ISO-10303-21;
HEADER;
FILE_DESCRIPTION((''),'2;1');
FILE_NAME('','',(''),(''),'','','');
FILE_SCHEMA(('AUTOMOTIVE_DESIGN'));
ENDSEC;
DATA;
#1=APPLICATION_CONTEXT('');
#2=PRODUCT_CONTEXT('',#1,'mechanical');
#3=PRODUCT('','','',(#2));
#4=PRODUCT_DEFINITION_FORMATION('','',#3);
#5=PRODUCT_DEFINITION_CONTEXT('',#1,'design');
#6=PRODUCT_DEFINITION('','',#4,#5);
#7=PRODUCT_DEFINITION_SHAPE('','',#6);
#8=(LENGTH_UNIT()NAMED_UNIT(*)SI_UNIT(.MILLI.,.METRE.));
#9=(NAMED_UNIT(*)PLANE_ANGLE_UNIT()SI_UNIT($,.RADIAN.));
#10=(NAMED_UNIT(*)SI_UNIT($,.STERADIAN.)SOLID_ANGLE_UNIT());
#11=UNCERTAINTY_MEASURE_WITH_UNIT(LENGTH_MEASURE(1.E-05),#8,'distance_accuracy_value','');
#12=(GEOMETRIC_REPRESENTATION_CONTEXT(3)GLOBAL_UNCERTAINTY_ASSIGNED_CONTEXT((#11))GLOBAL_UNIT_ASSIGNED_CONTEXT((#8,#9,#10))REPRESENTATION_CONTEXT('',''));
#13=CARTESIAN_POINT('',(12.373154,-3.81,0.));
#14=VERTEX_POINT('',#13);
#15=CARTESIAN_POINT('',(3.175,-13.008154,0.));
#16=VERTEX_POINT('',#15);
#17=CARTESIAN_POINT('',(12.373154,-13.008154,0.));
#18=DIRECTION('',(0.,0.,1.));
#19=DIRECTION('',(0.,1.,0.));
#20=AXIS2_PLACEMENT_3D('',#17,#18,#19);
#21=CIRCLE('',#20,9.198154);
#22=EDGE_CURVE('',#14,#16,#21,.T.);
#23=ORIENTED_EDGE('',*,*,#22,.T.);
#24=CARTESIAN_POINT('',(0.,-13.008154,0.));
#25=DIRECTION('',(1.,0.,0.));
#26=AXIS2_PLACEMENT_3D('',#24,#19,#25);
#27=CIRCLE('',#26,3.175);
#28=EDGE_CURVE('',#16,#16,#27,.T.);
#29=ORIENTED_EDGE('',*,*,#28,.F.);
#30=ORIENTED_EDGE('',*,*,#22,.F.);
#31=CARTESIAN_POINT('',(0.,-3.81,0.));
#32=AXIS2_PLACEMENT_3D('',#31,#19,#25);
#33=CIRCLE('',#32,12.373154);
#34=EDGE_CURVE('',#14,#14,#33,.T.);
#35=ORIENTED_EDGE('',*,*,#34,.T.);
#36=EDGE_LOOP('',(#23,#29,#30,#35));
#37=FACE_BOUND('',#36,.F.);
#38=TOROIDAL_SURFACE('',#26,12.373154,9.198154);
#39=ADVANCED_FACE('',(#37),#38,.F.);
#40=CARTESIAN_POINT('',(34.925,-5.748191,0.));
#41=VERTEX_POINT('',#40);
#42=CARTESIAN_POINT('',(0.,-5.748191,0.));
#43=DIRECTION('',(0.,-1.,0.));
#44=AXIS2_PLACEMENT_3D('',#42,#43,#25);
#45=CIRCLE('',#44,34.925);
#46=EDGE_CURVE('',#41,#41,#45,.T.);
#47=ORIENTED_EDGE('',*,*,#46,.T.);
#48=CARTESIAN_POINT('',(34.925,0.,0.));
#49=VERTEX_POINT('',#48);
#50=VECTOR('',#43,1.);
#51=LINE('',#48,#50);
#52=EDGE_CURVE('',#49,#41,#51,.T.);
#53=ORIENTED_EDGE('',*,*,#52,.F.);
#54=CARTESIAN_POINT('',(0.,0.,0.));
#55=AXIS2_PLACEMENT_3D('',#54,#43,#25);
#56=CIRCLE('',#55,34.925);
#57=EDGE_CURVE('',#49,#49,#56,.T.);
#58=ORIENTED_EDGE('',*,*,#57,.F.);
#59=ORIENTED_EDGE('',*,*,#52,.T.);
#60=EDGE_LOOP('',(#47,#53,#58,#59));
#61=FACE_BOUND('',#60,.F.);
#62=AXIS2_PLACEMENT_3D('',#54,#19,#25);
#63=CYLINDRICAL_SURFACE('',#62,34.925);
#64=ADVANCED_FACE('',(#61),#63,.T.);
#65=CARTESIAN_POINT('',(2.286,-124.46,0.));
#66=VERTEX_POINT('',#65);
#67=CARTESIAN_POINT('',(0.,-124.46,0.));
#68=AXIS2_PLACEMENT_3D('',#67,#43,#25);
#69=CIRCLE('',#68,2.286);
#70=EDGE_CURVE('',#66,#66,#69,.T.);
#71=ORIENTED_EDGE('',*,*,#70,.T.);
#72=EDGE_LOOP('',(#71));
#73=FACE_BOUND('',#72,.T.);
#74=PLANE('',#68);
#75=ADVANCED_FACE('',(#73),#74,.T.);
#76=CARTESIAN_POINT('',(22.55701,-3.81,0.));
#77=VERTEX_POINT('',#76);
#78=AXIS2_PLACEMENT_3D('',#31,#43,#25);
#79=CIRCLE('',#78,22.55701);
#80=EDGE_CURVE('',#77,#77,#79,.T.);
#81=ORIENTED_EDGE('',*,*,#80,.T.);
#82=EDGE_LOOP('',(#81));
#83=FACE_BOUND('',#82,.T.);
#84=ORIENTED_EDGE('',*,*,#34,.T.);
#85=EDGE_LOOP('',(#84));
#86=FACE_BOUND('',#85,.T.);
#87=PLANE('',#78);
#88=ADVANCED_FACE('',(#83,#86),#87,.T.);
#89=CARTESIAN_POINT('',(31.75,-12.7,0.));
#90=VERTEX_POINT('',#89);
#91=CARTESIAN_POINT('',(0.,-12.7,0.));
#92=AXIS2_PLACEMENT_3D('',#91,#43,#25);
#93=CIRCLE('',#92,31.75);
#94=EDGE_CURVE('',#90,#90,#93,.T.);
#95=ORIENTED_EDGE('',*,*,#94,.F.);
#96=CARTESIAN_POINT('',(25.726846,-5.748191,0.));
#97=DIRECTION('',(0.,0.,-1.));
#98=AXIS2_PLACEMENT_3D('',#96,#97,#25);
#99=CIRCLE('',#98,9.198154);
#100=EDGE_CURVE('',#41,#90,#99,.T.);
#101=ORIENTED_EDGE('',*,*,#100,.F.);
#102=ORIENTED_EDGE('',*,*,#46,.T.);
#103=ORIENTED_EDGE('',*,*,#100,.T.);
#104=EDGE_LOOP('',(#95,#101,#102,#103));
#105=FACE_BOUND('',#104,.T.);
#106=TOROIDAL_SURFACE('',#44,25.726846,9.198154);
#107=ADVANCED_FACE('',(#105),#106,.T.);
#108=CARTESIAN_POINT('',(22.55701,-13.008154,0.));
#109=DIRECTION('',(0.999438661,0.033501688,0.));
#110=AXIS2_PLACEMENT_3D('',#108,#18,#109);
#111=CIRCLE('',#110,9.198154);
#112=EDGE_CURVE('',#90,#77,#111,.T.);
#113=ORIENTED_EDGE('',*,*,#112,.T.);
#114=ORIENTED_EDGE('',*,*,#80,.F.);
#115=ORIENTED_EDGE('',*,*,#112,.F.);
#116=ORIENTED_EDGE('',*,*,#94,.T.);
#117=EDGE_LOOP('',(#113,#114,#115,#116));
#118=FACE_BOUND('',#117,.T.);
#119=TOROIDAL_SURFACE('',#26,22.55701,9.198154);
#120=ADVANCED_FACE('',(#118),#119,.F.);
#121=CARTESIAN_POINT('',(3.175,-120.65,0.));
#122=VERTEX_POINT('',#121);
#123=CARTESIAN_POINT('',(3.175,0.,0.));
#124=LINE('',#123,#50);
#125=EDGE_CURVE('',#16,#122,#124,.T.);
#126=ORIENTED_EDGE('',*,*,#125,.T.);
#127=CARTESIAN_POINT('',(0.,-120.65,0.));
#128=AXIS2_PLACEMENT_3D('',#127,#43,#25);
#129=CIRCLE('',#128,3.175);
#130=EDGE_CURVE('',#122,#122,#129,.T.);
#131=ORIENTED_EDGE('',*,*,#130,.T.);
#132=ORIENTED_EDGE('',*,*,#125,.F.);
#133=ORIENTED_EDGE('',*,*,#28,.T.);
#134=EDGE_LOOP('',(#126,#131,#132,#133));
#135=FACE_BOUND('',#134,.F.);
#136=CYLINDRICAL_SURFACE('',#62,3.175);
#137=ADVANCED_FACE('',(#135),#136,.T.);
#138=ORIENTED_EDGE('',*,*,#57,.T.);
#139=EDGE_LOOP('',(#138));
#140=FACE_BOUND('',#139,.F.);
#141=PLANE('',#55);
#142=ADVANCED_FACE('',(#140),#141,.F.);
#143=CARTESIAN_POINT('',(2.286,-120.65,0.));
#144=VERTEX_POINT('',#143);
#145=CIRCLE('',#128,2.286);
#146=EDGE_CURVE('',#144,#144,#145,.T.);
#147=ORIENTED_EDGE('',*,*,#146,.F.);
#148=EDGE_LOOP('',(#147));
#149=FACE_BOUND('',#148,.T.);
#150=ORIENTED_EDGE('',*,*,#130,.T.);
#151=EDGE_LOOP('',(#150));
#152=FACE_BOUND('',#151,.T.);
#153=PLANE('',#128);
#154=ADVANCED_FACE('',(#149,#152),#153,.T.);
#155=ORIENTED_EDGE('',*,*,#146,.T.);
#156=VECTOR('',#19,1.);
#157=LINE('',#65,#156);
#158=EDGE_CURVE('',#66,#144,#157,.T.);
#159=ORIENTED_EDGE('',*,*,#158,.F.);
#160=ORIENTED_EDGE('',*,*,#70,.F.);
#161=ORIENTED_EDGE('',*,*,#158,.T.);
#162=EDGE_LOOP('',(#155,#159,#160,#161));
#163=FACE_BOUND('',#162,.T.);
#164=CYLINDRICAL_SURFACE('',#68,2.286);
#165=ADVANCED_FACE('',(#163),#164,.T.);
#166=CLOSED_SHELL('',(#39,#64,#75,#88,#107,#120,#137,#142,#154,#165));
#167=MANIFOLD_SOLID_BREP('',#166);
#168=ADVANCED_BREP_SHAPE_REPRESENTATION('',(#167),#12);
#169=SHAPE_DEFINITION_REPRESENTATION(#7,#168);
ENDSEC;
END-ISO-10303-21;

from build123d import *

# Parameters (mm, degrees)
F0_R     = 31.75
F0_R_2   = 3.175
F1_DEPTH = 3.81
F2_DEPTH = 124.46
F0_R_3   = 34.925
F3_DEPTH = 12.7
F5_R     = 3.175
F5_R_2   = 2.286
F6_DEPTH = 3.81


# Not quite as in the source:
# - a fillet or chamfer that OpenCascade refuses, or shapes differently, is made with other operations: its cross-section is extruded or revolved along the edge and cut away or added


with BuildPart() as f1:
    # F0 (on Front) → F1 (new body)
    with BuildSketch(Plane.XZ):
        Circle(F0_R)
        Circle(F0_R_2, mode=Mode.SUBTRACT)
        Circle(F0_R_2)
    extrude(amount=F1_DEPTH)

    # F0 (on Front) → F2 (join)
    with BuildSketch(Plane.XZ):
        Circle(F0_R_2)
    extrude(amount=F2_DEPTH)

    # F0 (on Front) → F3 (join)
    with BuildSketch(Plane.XZ):
        Circle(F0_R_3)
        Circle(F0_R, mode=Mode.SUBTRACT)
    extrude(amount=F3_DEPTH)

    # F4: fillet of radius 9.1981536726 on 3 edges, made by hand

    # F4_s1 → F4_t2 (revolve)
    with BuildSketch(Plane.XY):
        with BuildLine():
            ThreePointArc((31.75, -12.7), (28.9512095664, -6.3960255802), (22.5570096106, -3.81))
            Line((22.5570096106, -3.81), (31.75, -3.81))
            Line((31.75, -3.81), (31.75, -12.7))
        make_face()
    revolve(axis=Axis((0, -3.81, 0), (0, -1, 0)))

    # F4_s3 → F4_t4 (revolve)
    with BuildSketch(Plane.XY):
        with BuildLine():
            ThreePointArc((12.3731536726, -3.81), (5.8690768363, -6.5040768363), (3.175, -13.0081536726))
            Line((3.175, -13.0081536726), (3.175, -3.81))
            Line((3.175, -3.81), (12.3731536726, -3.81))
        make_face()
    revolve(axis=Axis((0, -3.81, 0), (0, 1, 0)))

    # F4_s5 → F4_t6 (revolve, cut)
    with BuildSketch(Plane.XY):
        with BuildLine():
            ThreePointArc((34.925, -5.7481908239), (34.0936833659, -9.5694561844), (31.75, -12.7))
            Line((31.75, -12.7), (34.925, -12.7))
            Line((34.925, -12.7), (34.925, -5.7481908239))
        make_face()
    revolve(axis=Axis((0, -12.7, 0), (0, -1, 0)), mode=Mode.SUBTRACT)

    # F5 (on face) → F6 (cut)
    with BuildSketch(Plane.XZ.offset(124.46)):
        Circle(F5_R)
        Circle(F5_R_2, mode=Mode.SUBTRACT)
    extrude(amount=-F6_DEPTH, mode=Mode.SUBTRACT)


solid = f1.part
